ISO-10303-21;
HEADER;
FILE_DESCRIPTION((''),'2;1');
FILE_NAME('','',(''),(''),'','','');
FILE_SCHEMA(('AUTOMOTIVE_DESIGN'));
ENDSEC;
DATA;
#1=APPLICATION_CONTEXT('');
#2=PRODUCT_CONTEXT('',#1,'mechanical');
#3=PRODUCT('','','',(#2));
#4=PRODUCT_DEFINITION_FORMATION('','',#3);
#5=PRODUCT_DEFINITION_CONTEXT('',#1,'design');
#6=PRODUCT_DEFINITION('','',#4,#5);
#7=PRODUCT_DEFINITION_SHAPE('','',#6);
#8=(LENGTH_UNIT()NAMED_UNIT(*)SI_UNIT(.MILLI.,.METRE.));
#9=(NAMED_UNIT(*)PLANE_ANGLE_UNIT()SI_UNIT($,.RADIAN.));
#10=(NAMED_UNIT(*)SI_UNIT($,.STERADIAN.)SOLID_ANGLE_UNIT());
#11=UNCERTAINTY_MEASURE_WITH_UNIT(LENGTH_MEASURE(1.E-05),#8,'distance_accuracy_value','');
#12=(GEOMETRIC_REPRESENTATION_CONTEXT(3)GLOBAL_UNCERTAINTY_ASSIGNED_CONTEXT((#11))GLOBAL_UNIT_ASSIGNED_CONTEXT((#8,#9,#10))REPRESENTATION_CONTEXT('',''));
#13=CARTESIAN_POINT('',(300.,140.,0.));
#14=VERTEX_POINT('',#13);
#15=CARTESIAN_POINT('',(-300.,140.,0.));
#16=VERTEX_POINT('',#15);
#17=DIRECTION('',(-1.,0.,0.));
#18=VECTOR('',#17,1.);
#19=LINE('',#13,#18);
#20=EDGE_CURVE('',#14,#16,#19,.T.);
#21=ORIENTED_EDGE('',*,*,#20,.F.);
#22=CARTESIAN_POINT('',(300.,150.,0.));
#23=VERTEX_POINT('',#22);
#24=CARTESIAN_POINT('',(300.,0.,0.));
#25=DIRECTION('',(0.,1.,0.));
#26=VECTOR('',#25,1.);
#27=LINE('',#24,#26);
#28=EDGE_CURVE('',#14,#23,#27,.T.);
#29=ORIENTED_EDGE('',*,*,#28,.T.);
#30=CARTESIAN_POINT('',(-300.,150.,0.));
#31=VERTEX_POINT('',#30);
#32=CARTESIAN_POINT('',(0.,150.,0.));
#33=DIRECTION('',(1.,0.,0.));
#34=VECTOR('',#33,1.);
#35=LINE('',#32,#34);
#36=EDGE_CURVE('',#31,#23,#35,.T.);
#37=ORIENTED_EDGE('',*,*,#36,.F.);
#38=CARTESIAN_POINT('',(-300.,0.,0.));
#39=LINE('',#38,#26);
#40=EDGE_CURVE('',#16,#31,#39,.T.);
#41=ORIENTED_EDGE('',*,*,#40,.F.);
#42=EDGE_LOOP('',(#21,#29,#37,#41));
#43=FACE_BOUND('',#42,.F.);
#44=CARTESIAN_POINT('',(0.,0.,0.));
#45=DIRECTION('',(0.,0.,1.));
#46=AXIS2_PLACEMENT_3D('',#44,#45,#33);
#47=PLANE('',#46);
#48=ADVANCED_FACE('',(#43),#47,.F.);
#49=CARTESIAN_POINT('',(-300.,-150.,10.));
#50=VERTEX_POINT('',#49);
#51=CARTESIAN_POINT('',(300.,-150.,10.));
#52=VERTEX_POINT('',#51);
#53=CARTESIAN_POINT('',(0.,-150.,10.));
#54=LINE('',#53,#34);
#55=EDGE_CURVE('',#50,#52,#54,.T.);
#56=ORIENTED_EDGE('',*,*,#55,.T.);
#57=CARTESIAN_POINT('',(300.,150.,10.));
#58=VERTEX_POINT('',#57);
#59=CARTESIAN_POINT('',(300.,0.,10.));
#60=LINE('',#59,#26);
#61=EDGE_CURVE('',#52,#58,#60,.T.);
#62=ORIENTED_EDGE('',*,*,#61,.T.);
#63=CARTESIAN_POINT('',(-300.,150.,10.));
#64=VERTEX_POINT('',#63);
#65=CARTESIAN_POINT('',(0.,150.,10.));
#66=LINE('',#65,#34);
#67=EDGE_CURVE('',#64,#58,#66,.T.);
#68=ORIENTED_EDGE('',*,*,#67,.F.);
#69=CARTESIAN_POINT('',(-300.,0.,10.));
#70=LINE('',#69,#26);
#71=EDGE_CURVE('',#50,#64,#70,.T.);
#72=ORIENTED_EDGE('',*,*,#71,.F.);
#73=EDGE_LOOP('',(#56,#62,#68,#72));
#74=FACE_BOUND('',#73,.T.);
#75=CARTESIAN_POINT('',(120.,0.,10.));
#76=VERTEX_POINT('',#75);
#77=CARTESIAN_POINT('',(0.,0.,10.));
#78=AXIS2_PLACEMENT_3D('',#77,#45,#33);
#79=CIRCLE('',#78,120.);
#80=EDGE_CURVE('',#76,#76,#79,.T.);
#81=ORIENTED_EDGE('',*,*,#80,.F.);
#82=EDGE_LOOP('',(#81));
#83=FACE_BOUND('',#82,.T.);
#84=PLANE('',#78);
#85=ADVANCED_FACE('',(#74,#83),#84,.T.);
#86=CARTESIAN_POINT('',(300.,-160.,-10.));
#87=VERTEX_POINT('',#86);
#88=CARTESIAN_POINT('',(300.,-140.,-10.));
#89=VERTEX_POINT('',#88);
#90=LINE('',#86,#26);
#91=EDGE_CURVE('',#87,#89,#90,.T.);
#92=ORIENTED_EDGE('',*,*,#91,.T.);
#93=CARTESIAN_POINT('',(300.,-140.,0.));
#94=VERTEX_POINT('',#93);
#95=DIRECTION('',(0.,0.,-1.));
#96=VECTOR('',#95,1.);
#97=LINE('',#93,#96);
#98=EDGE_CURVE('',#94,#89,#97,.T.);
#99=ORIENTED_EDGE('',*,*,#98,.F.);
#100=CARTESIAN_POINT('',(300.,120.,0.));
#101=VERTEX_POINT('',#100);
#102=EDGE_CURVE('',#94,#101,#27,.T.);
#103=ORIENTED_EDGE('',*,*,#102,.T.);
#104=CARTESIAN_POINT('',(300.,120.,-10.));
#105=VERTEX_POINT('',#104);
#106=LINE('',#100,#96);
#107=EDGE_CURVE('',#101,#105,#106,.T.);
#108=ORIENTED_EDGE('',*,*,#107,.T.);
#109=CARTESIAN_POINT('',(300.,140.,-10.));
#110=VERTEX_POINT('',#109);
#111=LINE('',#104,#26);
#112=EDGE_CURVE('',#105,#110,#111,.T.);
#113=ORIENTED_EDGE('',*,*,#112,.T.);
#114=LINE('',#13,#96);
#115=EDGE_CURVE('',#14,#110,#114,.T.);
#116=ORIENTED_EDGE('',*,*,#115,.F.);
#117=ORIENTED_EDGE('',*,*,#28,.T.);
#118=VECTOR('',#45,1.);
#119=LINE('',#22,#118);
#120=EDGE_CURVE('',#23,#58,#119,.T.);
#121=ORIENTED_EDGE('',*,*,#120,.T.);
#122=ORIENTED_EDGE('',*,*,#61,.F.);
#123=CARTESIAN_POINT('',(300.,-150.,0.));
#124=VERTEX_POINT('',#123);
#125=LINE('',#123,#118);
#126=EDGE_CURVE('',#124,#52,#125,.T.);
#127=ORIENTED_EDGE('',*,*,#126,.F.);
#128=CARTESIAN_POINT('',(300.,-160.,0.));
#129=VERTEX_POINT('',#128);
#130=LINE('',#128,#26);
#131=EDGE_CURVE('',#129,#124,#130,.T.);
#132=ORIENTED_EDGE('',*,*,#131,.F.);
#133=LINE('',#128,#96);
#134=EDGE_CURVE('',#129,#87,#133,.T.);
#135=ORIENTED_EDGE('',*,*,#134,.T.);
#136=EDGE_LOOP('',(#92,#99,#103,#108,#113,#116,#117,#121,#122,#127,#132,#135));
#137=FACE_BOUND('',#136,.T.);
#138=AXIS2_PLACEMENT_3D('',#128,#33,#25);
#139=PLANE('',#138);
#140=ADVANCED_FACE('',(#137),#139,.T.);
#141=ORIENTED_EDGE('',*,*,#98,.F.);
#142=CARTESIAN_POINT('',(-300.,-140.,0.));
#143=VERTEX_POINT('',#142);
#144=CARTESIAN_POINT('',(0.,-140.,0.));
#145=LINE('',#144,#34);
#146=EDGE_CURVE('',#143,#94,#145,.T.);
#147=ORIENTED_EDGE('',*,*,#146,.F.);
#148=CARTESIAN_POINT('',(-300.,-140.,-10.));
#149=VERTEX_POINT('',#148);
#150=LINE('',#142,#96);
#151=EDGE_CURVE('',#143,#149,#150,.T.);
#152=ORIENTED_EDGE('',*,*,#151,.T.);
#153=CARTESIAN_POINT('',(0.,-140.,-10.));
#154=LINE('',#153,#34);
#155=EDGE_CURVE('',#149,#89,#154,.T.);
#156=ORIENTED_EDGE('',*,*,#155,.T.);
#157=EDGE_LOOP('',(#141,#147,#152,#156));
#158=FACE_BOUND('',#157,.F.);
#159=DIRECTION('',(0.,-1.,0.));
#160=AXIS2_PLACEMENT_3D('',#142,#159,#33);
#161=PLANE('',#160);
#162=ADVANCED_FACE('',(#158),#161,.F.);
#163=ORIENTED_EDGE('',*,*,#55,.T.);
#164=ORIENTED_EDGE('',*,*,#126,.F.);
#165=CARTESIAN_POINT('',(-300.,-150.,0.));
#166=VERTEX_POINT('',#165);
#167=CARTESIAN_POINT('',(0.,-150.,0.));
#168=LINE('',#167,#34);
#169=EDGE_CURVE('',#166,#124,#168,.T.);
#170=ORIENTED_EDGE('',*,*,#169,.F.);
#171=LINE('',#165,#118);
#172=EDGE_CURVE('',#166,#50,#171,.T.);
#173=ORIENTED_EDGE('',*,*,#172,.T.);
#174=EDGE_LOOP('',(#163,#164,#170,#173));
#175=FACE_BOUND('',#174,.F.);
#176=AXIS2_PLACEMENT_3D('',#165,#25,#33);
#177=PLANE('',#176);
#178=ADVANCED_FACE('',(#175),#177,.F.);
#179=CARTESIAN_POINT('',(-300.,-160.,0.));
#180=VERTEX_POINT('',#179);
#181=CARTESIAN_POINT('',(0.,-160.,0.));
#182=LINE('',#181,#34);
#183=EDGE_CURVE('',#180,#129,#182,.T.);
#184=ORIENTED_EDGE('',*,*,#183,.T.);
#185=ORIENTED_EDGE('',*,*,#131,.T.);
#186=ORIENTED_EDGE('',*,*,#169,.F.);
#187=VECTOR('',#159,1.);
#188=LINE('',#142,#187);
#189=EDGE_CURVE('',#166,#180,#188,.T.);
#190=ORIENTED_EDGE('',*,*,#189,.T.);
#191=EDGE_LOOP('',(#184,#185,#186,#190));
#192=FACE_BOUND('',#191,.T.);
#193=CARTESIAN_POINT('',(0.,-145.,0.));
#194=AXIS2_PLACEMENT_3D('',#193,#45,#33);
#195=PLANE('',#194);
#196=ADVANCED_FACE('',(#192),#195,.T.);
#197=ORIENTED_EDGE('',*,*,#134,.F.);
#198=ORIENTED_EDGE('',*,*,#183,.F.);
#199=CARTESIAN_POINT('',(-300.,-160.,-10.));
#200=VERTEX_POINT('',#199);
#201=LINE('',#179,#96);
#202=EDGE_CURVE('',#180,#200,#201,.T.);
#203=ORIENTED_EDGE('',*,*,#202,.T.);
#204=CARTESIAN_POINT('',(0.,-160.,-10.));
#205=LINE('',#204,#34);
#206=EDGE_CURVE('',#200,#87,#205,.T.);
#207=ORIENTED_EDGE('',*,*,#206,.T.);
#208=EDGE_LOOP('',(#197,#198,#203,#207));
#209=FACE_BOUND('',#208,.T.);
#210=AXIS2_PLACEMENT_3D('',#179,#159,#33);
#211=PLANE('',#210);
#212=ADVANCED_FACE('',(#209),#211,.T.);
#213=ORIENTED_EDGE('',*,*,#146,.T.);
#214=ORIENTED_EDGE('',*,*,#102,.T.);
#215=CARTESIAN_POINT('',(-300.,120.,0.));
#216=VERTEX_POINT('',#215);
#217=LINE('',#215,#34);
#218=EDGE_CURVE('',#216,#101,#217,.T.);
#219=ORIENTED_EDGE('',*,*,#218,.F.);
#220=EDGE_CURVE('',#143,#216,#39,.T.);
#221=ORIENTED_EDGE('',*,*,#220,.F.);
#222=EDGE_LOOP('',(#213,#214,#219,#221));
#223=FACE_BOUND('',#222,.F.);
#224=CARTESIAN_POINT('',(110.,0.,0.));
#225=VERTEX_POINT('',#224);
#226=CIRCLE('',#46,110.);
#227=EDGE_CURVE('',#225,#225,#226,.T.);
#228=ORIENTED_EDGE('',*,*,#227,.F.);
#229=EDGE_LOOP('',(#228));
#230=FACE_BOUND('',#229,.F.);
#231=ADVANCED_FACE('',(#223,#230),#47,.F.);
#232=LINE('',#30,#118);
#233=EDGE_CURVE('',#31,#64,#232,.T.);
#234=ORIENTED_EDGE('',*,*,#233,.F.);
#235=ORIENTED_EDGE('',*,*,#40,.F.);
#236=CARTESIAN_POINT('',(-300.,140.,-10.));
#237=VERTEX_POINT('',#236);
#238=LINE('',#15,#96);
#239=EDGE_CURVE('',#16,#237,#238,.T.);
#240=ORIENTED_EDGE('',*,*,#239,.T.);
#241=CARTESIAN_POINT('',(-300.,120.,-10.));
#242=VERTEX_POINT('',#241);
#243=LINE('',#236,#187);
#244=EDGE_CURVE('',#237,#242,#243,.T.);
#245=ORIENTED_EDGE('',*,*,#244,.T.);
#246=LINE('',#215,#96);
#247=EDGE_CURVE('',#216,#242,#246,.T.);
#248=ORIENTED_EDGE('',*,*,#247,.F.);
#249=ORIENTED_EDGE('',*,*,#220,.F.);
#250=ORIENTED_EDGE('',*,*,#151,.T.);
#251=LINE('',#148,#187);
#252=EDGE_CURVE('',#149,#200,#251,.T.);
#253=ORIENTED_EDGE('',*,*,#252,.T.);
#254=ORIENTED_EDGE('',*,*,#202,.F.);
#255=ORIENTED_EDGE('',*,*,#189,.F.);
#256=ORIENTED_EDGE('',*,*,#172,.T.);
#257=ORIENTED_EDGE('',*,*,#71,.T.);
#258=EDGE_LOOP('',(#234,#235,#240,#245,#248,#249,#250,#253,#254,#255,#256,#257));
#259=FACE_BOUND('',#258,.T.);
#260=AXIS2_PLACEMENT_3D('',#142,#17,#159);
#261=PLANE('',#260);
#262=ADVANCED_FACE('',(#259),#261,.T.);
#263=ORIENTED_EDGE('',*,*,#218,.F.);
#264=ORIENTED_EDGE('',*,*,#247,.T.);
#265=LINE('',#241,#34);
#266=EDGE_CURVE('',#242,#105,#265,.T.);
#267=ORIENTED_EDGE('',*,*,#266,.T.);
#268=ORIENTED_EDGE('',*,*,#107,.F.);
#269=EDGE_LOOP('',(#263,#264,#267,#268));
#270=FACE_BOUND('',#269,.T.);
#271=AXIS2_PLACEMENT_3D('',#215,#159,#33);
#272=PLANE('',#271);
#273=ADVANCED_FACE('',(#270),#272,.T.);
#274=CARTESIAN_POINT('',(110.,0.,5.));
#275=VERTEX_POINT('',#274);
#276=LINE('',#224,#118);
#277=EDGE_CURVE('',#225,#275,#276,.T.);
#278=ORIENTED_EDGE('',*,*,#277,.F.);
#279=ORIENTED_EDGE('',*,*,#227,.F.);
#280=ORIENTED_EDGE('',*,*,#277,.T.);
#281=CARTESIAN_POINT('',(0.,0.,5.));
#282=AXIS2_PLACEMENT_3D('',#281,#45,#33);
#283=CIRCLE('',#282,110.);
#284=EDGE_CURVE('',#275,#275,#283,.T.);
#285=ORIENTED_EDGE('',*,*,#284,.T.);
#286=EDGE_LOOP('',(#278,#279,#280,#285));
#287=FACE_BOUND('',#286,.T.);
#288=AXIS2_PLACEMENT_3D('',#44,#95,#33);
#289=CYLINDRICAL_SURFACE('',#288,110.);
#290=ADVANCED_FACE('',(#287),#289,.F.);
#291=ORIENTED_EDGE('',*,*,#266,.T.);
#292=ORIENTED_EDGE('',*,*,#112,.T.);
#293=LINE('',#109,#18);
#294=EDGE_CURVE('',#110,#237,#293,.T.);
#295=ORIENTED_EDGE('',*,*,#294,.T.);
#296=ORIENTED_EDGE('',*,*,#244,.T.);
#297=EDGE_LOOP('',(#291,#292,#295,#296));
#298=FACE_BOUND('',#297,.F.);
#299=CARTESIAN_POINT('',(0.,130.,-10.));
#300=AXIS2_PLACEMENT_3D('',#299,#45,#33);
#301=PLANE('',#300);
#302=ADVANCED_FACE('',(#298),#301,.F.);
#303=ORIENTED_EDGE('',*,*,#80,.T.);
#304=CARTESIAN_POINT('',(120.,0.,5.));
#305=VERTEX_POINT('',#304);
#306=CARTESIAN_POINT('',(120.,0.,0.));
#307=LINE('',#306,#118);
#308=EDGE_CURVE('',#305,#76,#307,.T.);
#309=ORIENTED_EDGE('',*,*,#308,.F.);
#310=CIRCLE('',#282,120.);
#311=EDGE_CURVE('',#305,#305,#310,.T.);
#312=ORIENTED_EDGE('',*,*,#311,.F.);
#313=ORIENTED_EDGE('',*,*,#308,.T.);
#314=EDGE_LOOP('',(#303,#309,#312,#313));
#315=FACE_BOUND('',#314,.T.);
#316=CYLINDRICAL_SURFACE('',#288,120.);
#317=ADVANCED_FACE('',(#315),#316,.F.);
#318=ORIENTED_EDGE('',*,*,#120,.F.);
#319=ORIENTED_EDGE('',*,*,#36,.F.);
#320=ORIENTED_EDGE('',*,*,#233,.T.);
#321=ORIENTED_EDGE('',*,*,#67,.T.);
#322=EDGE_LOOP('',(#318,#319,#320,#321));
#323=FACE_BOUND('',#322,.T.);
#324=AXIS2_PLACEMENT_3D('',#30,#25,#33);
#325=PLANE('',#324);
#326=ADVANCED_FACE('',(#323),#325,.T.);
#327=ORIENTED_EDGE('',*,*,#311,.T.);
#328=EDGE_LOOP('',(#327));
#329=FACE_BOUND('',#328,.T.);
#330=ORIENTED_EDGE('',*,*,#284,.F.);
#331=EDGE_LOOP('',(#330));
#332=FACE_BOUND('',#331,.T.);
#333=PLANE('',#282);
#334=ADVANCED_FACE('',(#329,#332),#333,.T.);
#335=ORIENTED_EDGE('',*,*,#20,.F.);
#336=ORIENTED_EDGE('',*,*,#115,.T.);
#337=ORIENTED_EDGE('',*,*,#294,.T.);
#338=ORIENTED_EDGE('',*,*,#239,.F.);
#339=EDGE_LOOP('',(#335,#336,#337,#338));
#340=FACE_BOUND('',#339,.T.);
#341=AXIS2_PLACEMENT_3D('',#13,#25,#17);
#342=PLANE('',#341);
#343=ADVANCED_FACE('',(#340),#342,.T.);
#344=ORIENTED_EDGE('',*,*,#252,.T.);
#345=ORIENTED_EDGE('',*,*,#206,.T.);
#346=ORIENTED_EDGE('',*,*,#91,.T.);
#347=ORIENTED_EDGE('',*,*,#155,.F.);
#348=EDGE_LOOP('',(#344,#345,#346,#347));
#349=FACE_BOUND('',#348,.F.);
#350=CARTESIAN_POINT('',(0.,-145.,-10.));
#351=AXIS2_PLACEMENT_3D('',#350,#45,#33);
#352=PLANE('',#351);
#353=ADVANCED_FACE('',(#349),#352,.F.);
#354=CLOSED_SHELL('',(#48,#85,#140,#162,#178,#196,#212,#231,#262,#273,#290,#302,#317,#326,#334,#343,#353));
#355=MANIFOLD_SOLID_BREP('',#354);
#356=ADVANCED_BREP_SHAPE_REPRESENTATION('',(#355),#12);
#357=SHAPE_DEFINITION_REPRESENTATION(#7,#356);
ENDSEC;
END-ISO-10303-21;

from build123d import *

# Parameters (mm, degrees)
F0_W     = 600
F0_H     = 300
F0_R     = 120
F1_DEPTH = 10
F0_R_2   = 110
F2_DEPTH = 5
F3_W     = 600
F3_H     = 10
F4_DEPTH = 10


# Not quite as in the source:
# - a feature names something its author has since deleted; it is built from what else it names


with BuildPart() as f1:
    # F0 (on Top) → F1 (new body)
    with BuildSketch(Plane.XY):
        Rectangle(F0_W, F0_H)
        Circle(F0_R, mode=Mode.SUBTRACT)
    extrude(amount=F1_DEPTH)

    # F0 (on Top) → F2 (join)
    with BuildSketch(Plane.XY):
        Circle(F0_R)
        Circle(F0_R_2, mode=Mode.SUBTRACT)
    extrude(amount=F2_DEPTH)

    # F3 (on face) → F4 (join)
    with BuildSketch(Plane.XY):
        with Locations((0, -145)):
            Rectangle(F3_W, F3_H)
        with Locations((0, -155)):
            Rectangle(F3_W, F3_H)
        Polygon((300, 140), (-300, 140), (-300, 120), (-9.09e-08, 120), (300, 120), align=None)
    extrude(amount=-F4_DEPTH)


solid = f1.part
